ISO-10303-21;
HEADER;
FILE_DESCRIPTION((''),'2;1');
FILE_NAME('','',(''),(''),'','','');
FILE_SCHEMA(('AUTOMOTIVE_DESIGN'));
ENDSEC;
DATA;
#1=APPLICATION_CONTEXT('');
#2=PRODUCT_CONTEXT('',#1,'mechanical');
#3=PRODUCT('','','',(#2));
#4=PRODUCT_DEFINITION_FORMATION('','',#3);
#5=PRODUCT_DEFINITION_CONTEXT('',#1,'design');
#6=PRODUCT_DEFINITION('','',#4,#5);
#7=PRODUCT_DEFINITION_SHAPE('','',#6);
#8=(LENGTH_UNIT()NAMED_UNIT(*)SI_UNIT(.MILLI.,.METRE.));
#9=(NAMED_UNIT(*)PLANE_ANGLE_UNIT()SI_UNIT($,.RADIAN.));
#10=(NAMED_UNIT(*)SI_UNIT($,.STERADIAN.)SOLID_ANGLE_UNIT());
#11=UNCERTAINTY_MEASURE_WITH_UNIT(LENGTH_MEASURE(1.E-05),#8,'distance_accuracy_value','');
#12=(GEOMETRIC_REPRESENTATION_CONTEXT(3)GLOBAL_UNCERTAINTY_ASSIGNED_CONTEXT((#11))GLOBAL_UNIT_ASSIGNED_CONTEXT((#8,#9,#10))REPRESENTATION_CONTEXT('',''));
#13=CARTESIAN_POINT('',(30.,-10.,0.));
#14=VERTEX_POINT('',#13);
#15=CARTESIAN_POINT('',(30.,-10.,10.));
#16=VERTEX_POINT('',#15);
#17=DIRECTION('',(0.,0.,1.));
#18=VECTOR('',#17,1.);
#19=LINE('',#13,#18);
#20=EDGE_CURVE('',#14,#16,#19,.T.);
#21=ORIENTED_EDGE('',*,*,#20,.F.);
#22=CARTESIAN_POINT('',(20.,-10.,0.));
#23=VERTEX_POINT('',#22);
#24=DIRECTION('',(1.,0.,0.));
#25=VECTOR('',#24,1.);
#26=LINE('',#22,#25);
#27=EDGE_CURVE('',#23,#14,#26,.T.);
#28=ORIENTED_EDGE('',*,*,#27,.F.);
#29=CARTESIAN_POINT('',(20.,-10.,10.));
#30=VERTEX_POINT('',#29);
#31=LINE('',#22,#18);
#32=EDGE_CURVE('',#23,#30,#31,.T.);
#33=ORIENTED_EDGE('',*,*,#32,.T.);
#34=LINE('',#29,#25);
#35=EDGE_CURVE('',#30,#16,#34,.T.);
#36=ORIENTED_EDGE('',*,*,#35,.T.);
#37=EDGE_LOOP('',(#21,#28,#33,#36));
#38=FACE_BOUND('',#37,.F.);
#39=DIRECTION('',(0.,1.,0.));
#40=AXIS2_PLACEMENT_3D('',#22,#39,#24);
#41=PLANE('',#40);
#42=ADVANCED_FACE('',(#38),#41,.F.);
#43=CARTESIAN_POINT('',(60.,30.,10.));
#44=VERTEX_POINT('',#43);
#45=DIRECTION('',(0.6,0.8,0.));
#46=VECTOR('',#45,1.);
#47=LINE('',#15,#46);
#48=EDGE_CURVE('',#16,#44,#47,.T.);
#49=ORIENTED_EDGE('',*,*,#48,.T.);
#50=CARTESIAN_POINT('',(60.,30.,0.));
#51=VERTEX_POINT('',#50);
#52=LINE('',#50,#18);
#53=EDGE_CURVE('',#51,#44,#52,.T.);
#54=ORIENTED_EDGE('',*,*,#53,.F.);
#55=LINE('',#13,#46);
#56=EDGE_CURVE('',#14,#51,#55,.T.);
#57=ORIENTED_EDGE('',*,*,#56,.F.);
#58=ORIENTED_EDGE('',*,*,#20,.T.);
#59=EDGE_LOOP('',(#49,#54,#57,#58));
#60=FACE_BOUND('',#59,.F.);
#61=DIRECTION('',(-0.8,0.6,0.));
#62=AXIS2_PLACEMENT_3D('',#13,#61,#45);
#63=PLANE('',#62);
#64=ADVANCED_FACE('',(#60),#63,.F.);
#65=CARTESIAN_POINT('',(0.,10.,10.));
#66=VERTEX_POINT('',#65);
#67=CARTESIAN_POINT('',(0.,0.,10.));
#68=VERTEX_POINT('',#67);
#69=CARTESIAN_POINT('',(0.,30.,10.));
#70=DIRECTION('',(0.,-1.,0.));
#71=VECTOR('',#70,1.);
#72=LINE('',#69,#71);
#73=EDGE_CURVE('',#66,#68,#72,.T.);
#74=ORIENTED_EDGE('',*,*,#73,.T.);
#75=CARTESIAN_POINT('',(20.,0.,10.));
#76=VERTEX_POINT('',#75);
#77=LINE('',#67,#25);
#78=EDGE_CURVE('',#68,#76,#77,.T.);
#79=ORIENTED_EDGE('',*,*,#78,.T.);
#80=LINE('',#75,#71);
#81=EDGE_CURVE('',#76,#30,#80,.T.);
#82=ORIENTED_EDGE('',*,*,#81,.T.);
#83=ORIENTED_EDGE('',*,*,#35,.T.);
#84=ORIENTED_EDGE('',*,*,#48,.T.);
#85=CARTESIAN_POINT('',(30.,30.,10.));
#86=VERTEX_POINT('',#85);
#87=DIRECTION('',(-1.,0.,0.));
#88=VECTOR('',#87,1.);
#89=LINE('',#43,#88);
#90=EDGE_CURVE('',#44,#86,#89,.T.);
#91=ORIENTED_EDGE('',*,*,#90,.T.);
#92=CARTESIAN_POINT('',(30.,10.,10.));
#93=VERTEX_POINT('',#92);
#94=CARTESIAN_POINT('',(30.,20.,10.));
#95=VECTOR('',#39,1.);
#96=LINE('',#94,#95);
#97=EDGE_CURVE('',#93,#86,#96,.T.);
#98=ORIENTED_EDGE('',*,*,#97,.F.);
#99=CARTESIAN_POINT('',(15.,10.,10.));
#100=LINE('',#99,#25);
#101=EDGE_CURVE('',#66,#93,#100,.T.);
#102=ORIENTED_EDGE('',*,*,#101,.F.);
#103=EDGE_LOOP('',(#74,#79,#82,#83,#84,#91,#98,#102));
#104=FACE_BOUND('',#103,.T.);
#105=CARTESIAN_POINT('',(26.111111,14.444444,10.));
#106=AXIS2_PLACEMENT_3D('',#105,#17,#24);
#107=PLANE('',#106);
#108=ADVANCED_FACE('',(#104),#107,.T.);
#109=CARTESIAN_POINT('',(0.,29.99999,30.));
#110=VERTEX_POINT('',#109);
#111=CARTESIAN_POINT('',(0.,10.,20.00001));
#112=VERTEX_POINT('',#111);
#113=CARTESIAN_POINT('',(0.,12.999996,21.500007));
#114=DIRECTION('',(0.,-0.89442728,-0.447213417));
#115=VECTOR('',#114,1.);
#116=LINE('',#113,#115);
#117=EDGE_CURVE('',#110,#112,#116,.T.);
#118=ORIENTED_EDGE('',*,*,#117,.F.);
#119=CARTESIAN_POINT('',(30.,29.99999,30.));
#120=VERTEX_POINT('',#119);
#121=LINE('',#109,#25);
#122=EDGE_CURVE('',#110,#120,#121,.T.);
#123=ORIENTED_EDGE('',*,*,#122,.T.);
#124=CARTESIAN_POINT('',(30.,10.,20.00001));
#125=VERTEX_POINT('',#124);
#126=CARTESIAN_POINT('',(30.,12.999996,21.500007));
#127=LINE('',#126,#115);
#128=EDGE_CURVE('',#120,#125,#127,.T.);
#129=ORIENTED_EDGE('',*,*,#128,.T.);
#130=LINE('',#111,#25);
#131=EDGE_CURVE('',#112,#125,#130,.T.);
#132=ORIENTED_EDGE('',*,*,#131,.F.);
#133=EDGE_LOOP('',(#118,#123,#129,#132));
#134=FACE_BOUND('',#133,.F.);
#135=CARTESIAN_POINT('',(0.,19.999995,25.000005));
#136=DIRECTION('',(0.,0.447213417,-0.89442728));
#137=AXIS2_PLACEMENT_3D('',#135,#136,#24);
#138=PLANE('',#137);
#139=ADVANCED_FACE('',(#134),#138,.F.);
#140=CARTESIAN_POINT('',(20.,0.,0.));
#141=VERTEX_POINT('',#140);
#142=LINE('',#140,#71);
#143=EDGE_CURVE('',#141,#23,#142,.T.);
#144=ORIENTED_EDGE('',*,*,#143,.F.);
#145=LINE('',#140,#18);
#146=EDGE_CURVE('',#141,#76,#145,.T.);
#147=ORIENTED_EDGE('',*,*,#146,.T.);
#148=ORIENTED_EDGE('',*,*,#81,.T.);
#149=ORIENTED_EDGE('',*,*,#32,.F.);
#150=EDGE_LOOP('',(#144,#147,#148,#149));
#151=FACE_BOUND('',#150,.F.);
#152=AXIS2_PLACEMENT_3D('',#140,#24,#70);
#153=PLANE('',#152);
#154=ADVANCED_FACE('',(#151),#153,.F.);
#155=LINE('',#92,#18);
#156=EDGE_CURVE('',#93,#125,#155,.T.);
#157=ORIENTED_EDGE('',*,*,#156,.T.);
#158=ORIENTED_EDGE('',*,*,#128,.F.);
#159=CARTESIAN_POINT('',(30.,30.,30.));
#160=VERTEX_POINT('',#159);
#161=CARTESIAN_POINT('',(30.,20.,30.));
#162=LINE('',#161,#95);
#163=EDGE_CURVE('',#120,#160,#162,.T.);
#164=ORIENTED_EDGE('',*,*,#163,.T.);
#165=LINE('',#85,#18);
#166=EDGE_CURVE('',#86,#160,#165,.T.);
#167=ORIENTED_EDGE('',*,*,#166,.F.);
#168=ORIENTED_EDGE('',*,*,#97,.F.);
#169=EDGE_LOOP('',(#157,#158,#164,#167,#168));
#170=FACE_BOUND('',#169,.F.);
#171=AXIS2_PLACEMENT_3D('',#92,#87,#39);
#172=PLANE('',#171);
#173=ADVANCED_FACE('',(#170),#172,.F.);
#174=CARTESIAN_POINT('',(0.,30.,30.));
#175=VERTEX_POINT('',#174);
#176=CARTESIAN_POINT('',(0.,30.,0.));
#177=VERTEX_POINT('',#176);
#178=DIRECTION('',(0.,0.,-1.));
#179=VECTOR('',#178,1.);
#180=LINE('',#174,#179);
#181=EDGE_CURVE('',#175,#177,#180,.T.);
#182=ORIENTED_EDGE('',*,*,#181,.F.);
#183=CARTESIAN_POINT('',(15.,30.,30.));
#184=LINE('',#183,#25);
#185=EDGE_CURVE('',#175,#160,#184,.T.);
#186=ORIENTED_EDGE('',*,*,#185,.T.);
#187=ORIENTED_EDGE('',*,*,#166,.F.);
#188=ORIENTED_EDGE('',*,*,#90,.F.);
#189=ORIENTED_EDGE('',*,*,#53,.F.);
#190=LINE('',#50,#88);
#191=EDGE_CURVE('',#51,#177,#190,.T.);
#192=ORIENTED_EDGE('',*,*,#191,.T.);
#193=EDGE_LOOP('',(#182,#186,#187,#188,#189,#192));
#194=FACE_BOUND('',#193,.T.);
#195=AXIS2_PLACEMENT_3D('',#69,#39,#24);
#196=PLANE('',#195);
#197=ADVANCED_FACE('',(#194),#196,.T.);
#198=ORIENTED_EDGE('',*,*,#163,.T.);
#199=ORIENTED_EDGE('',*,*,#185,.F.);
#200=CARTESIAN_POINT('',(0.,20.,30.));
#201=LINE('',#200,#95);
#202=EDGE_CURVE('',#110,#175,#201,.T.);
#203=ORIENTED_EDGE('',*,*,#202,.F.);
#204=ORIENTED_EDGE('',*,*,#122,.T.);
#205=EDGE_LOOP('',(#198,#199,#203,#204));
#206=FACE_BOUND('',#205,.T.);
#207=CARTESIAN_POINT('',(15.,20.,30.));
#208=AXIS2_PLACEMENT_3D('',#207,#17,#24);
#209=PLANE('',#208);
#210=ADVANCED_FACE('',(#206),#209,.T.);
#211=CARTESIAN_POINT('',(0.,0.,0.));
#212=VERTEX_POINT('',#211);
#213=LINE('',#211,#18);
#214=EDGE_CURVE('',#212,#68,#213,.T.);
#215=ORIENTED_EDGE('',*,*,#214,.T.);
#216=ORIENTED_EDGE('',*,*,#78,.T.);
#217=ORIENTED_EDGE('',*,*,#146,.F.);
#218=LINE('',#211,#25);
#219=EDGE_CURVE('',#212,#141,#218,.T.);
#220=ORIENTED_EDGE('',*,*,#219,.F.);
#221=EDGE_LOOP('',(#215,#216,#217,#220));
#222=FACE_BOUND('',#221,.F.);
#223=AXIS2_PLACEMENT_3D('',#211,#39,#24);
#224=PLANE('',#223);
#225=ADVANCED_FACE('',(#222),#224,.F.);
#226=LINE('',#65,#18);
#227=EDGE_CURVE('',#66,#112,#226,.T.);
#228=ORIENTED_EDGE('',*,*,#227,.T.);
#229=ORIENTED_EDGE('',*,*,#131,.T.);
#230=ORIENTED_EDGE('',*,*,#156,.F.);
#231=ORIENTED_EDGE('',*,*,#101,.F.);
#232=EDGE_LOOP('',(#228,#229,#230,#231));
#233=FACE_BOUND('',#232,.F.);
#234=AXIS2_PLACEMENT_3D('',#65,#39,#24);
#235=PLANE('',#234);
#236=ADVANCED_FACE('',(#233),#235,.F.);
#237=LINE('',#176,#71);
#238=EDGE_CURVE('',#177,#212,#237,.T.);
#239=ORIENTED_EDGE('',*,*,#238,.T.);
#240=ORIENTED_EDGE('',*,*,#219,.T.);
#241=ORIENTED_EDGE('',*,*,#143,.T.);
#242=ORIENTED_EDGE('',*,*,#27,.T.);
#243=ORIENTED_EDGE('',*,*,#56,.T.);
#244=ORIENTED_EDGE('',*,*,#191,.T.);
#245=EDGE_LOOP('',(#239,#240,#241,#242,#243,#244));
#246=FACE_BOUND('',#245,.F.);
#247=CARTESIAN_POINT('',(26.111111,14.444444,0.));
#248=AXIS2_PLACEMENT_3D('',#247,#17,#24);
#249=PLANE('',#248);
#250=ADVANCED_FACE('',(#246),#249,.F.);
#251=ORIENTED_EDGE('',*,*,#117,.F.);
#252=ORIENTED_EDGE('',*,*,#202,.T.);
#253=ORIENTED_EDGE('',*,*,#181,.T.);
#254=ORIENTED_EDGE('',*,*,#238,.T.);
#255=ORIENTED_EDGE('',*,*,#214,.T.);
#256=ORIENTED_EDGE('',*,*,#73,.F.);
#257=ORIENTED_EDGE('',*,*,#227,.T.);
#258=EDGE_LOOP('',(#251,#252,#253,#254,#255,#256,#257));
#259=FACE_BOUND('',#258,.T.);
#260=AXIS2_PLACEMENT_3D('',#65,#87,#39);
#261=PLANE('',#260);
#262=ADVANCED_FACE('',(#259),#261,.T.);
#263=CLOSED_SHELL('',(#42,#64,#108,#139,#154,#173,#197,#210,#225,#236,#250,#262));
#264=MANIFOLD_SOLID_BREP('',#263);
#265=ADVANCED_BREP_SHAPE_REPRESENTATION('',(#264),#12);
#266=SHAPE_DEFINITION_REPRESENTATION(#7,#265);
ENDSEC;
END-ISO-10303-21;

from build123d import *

# Parameters (mm, degrees)
F1_DEPTH = 10
F2_W     = 30
F2_H     = 20
F3_DEPTH = 20
F4_SIZE2 = 9.99999
F4_SIZE  = 19.99999


# Not quite as in the source:
# - a fillet or chamfer is up to 0.001 mm smaller than in the source, because OpenCascade refuses the exact size


with BuildPart() as f1:
    # F0 (on Top) → F1 (new body)
    with BuildSketch(Plane.XY):
        Polygon((0, 30), (0, 0), (20, 0), (20, -10), (30, -10), (60, 30), align=None)
    extrude(amount=F1_DEPTH)

    # F2 (on face) → F3 (join)
    with BuildSketch(Plane.XY.offset(10)):
        with Locations((15, 20)):
            Rectangle(F2_W, F2_H)
    extrude(amount=F3_DEPTH)

    # F4 (size 20 and 10 in the source; OpenCascade refuses exactly that, so slightly less here)
    f4_edges = [f1.edges().sort_by_distance(p)[0] for p in [
        (15, 10, 30),
    ]]
    f4_side = f1.faces().sort_by_distance((15, 20, 30))[0]
    chamfer(f4_edges, length=F4_SIZE, length2=F4_SIZE2, reference=f4_side)


solid = f1.part
